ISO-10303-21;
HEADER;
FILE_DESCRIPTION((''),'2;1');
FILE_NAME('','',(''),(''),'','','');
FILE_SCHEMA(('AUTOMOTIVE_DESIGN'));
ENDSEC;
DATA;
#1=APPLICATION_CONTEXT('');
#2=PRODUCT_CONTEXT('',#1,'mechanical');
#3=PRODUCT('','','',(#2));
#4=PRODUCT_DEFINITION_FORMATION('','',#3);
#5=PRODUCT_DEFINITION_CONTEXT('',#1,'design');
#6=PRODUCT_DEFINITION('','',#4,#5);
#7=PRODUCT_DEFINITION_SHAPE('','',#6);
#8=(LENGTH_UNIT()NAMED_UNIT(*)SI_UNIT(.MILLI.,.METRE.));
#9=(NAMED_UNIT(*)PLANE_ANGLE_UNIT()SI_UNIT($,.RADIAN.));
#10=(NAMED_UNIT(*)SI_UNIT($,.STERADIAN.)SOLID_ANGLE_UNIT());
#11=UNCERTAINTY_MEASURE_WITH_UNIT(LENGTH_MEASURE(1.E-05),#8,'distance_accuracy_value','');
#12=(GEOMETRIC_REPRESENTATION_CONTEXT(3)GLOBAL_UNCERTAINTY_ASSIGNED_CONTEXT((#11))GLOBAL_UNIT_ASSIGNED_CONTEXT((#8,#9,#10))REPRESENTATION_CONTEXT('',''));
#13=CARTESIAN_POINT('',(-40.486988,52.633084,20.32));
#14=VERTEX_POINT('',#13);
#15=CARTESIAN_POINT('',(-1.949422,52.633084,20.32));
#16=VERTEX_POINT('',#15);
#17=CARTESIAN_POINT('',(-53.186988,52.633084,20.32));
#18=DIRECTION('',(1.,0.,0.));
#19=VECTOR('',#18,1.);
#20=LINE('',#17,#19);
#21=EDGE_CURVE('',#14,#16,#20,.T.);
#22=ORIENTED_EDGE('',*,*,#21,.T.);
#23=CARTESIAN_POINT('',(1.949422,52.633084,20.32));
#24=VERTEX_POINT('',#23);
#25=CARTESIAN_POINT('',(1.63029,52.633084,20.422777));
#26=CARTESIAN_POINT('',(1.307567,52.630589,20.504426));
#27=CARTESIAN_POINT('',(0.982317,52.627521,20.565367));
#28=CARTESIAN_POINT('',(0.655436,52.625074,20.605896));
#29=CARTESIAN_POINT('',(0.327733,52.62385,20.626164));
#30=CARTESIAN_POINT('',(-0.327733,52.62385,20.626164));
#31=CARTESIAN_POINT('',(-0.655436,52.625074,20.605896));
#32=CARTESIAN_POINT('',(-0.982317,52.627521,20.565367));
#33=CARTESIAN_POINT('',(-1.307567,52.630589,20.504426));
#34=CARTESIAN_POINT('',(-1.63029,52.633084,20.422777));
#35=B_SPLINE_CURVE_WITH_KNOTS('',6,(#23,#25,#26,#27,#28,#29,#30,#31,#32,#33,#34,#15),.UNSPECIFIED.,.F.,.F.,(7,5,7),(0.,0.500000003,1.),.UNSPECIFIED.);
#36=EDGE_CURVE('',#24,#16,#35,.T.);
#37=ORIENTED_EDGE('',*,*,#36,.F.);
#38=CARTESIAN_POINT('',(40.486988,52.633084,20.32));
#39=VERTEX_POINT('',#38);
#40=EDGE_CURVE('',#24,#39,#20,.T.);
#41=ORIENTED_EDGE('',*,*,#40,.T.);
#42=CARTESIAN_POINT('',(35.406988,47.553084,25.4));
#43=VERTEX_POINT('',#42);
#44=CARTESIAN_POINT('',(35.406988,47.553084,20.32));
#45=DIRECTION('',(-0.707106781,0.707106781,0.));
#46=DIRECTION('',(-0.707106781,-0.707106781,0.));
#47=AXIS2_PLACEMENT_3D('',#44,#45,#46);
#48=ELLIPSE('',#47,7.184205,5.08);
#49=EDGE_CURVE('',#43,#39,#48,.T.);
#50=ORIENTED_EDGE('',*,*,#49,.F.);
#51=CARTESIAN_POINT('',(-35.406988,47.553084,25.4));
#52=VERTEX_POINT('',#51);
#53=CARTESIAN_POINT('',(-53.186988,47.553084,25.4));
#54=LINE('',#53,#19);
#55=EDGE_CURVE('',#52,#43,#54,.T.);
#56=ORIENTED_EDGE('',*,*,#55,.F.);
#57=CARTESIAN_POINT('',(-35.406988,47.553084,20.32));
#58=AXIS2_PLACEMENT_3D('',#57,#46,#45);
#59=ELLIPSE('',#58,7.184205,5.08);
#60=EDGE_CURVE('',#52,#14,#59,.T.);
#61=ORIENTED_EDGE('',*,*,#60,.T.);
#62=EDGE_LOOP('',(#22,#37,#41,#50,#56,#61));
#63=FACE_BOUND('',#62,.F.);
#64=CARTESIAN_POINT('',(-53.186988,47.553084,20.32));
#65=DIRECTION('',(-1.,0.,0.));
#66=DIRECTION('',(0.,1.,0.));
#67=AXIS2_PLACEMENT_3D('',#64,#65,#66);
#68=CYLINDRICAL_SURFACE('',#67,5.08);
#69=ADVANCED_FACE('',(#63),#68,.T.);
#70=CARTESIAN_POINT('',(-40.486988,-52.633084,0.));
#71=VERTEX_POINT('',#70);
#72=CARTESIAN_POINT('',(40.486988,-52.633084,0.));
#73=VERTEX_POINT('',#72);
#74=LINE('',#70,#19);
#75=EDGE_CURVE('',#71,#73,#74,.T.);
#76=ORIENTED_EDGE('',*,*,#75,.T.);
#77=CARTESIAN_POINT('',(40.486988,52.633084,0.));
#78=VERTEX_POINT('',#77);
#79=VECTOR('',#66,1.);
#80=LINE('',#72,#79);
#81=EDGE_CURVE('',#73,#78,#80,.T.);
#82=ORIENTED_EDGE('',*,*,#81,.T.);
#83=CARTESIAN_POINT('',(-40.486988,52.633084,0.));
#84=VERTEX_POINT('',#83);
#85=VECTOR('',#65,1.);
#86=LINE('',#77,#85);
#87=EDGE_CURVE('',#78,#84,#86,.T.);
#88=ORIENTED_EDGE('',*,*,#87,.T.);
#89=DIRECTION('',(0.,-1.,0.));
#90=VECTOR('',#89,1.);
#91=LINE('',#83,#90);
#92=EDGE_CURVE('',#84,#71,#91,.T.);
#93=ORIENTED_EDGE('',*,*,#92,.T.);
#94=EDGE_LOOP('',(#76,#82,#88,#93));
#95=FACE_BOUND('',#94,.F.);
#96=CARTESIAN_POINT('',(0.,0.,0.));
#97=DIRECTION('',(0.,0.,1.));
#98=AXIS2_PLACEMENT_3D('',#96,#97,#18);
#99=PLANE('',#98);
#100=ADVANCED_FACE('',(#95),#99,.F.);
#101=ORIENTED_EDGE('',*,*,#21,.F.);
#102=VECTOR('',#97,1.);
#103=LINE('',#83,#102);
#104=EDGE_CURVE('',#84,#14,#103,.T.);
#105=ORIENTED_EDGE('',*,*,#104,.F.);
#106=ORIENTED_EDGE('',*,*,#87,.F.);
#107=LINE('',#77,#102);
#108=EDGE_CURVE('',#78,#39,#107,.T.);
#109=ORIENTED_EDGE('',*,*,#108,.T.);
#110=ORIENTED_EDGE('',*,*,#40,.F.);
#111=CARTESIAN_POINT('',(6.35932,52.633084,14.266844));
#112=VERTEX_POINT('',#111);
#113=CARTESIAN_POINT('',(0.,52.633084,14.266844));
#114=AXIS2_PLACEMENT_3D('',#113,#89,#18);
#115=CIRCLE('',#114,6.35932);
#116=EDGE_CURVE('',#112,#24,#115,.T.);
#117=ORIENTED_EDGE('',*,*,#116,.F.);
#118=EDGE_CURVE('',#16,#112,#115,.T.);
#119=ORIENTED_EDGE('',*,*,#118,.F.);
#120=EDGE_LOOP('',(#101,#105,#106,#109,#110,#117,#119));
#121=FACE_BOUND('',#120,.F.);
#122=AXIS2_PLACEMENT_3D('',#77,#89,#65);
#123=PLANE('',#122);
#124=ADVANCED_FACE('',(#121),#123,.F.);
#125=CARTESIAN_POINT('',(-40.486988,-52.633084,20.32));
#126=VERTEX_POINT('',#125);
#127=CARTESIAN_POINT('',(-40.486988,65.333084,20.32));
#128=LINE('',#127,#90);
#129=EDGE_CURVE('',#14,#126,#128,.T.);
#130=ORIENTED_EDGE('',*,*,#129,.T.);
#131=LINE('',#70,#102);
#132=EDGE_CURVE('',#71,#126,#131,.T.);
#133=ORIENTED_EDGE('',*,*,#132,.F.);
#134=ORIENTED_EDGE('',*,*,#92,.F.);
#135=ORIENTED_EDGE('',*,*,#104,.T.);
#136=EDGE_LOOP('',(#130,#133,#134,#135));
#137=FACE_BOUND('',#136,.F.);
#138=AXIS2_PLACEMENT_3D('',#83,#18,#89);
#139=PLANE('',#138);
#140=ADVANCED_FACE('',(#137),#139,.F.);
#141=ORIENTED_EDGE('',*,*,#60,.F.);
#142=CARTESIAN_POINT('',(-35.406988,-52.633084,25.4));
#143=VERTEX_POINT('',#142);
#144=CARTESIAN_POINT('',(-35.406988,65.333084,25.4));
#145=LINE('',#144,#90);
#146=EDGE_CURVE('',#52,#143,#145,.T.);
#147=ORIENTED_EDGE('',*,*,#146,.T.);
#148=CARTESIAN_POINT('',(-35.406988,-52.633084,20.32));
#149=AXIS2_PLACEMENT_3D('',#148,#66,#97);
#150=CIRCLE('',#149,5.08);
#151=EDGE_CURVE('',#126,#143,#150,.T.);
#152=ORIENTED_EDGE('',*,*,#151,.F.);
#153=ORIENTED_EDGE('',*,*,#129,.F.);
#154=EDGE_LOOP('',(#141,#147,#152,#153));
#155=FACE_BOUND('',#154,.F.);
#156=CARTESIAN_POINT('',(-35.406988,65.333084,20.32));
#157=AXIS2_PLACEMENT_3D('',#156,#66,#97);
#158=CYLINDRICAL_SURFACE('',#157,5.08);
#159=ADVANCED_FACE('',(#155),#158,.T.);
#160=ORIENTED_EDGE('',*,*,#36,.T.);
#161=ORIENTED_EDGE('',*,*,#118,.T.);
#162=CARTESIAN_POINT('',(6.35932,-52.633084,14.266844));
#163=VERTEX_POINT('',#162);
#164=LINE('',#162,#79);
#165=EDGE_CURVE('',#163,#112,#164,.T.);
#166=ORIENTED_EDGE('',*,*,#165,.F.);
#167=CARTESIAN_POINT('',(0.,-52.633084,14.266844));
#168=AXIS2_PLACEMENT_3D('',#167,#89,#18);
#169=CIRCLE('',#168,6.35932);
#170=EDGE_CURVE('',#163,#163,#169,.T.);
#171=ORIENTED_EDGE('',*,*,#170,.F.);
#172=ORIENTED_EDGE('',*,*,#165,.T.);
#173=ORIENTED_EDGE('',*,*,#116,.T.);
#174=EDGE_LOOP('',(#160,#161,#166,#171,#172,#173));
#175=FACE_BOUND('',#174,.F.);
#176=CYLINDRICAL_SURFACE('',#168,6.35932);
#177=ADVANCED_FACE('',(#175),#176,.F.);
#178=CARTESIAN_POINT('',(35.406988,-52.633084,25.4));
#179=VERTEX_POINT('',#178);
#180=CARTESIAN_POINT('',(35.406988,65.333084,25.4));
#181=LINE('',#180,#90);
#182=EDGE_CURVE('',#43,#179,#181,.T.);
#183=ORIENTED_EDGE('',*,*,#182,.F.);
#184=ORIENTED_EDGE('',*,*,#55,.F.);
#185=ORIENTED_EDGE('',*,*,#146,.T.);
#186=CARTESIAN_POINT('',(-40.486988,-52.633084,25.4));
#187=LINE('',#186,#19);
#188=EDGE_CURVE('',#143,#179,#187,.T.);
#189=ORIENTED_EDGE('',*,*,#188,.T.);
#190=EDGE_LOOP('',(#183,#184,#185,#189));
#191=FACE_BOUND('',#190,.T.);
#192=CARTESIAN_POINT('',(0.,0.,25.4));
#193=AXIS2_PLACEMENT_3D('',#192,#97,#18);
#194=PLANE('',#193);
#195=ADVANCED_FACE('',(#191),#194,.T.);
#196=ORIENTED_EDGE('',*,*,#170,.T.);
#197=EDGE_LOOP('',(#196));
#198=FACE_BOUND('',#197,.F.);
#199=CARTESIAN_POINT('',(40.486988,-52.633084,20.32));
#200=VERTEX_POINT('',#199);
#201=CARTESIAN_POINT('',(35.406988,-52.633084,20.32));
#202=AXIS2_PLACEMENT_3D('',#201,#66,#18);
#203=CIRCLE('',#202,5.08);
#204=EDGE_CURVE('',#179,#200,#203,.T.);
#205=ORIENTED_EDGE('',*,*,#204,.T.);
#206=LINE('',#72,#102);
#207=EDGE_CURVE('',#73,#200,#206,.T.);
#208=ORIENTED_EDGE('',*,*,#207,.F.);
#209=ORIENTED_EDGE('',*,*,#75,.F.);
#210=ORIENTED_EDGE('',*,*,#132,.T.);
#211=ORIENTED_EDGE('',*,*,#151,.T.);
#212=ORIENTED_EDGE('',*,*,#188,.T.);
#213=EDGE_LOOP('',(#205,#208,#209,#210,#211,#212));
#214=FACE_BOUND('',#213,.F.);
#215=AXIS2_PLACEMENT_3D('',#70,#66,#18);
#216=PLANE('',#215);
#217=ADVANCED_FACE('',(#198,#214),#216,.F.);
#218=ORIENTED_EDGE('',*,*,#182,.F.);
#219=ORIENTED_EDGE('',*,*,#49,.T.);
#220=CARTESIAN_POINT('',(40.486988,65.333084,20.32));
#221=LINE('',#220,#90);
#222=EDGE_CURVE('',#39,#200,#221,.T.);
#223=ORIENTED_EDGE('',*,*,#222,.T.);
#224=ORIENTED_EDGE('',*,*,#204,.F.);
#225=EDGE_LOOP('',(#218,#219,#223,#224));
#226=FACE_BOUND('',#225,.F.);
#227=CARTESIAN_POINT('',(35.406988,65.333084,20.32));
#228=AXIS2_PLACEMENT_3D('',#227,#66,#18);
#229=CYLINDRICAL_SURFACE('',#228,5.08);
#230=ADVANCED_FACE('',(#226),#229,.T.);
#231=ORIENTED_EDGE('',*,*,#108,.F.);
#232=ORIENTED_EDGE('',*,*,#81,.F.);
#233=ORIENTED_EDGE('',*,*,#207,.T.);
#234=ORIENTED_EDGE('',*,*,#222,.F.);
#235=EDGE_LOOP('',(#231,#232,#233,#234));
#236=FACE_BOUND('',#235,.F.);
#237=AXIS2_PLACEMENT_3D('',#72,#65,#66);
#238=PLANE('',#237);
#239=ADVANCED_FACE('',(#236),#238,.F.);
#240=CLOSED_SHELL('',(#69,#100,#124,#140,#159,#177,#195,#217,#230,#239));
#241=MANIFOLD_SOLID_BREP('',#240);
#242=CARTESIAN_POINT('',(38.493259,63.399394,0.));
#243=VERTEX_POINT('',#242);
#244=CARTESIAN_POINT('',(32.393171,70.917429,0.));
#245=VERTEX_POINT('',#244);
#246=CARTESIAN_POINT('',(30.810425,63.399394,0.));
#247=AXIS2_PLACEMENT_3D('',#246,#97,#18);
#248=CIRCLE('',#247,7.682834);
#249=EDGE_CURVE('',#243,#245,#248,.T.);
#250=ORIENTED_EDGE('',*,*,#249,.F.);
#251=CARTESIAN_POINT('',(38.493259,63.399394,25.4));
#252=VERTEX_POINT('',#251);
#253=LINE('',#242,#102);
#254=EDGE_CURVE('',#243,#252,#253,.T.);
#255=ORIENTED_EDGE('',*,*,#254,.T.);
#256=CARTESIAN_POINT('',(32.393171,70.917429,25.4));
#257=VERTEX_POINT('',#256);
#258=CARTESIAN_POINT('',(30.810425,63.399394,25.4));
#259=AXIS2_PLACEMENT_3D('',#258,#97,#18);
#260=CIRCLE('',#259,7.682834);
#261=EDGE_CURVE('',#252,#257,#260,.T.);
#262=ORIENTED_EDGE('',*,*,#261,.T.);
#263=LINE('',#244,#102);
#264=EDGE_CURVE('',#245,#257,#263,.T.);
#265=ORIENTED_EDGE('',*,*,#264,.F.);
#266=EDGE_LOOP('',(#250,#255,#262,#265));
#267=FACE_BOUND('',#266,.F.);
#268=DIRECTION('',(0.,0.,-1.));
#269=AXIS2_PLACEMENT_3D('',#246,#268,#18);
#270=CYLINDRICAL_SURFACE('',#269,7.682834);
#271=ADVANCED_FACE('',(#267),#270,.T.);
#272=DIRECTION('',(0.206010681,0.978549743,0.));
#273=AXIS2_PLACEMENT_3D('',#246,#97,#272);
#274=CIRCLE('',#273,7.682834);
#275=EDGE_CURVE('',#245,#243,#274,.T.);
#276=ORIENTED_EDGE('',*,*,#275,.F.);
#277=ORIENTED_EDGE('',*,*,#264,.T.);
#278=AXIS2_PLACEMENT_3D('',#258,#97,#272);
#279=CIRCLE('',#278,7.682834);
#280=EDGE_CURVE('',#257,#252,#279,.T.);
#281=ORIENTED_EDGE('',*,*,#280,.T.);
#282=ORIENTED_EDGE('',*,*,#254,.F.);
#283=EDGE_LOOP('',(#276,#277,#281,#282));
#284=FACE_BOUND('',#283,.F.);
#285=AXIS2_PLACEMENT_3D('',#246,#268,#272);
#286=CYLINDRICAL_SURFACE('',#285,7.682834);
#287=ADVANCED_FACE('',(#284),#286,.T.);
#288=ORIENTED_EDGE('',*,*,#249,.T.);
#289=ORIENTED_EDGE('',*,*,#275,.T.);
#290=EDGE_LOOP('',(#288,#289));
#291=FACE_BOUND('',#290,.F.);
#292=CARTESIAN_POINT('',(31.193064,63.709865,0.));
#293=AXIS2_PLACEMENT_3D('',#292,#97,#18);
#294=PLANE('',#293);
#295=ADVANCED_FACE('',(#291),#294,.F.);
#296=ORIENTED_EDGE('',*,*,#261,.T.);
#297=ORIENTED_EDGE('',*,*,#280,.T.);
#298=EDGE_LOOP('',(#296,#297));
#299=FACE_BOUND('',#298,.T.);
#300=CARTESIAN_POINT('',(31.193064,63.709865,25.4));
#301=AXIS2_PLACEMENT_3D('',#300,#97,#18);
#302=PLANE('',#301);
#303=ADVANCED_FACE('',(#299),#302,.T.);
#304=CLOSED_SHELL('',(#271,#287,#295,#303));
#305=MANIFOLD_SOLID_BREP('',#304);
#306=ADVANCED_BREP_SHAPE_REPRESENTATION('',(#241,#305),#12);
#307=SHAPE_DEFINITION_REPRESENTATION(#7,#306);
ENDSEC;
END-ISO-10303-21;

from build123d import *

# Parameters (mm, degrees)
F1_DEPTH    = 25.4
F2_R        = 6.3593196361
F3_DEPTH    = 119.38
F4_T1_DEPTH = 106.3739753604
F4_T3_DEPTH = 130.6661687136


# Not quite as in the source:
# - a fillet or chamfer that OpenCascade refuses, or shapes differently, is made with other operations: its cross-section is extruded or revolved along the edge and cut away or added


with BuildPart() as f1:
    # F0 (on Top) → F1 (new body)
    with BuildSketch(Plane.XY):
        Polygon((40.4869876802, 52.6330843568), (0, 52.6330843568), (-40.4869876802, 52.6330843568), (-40.4869876802, 0), (-40.4869876802, -52.6330843568), (0, -52.6330843568), (40.4869876802, -52.6330843568), (40.4869876802, 0), align=None)
    extrude(amount=F1_DEPTH)

    # F2 (on face) → F3 (cut)
    with BuildSketch(Plane.XZ.offset(52.6330843568)):
        with Locations((0, 14.2668439075)):
            Circle(F2_R)
    extrude(amount=-F3_DEPTH, mode=Mode.SUBTRACT)

    # F4: fillet of radius 5.08 on 3 edges, made by hand

    # F4_s2 → F4_t1 (cut)
    with BuildSketch(Plane.YZ.offset(-53.1869876802)):
        with BuildLine():
            ThreePointArc((52.6330843568, 20.32), (51.1451868052, 23.9121024484), (47.5530843568, 25.4))
            Line((47.5530843568, 25.4), (52.6330843568, 25.4))
            Line((52.6330843568, 25.4), (52.6330843568, 20.32))
        make_face()
    extrude(amount=F4_T1_DEPTH, mode=Mode.SUBTRACT)

    # F4_s4 → F4_t3 (cut)
    with BuildSketch(Plane.XZ.offset(-65.3330843568)):
        with BuildLine():
            ThreePointArc((-35.4069876802, 25.4), (-38.9990901286, 23.9121024484), (-40.4869876802, 20.32))
            Line((-40.4869876802, 20.32), (-40.4869876802, 25.4))
            Line((-40.4869876802, 25.4), (-35.4069876802, 25.4))
        make_face()
        with BuildLine():
            ThreePointArc((40.4869876802, 20.32), (38.9990901286, 23.9121024484), (35.4069876802, 25.4))
            Line((35.4069876802, 25.4), (40.4869876802, 25.4))
            Line((40.4869876802, 25.4), (40.4869876802, 20.32))
        make_face()
    extrude(amount=F4_T3_DEPTH, mode=Mode.SUBTRACT)


with BuildPart() as f1b:
    # F0 (on Top) → F1, piece 2 (new body)
    with BuildSketch(Plane.XY):
        with BuildLine():
            ThreePointArc((32.393171096, 70.9174290403), (24.8444423571, 58.5586318274), (38.4932589397, 63.3993941659))
            ThreePointArc((38.4932589397, 63.3993941659), (36.7764082606, 68.2401565045), (32.393171096, 70.9174290403))
        make_face()
    extrude(amount=F1_DEPTH)


solid = Compound([f1.part, f1b.part])
